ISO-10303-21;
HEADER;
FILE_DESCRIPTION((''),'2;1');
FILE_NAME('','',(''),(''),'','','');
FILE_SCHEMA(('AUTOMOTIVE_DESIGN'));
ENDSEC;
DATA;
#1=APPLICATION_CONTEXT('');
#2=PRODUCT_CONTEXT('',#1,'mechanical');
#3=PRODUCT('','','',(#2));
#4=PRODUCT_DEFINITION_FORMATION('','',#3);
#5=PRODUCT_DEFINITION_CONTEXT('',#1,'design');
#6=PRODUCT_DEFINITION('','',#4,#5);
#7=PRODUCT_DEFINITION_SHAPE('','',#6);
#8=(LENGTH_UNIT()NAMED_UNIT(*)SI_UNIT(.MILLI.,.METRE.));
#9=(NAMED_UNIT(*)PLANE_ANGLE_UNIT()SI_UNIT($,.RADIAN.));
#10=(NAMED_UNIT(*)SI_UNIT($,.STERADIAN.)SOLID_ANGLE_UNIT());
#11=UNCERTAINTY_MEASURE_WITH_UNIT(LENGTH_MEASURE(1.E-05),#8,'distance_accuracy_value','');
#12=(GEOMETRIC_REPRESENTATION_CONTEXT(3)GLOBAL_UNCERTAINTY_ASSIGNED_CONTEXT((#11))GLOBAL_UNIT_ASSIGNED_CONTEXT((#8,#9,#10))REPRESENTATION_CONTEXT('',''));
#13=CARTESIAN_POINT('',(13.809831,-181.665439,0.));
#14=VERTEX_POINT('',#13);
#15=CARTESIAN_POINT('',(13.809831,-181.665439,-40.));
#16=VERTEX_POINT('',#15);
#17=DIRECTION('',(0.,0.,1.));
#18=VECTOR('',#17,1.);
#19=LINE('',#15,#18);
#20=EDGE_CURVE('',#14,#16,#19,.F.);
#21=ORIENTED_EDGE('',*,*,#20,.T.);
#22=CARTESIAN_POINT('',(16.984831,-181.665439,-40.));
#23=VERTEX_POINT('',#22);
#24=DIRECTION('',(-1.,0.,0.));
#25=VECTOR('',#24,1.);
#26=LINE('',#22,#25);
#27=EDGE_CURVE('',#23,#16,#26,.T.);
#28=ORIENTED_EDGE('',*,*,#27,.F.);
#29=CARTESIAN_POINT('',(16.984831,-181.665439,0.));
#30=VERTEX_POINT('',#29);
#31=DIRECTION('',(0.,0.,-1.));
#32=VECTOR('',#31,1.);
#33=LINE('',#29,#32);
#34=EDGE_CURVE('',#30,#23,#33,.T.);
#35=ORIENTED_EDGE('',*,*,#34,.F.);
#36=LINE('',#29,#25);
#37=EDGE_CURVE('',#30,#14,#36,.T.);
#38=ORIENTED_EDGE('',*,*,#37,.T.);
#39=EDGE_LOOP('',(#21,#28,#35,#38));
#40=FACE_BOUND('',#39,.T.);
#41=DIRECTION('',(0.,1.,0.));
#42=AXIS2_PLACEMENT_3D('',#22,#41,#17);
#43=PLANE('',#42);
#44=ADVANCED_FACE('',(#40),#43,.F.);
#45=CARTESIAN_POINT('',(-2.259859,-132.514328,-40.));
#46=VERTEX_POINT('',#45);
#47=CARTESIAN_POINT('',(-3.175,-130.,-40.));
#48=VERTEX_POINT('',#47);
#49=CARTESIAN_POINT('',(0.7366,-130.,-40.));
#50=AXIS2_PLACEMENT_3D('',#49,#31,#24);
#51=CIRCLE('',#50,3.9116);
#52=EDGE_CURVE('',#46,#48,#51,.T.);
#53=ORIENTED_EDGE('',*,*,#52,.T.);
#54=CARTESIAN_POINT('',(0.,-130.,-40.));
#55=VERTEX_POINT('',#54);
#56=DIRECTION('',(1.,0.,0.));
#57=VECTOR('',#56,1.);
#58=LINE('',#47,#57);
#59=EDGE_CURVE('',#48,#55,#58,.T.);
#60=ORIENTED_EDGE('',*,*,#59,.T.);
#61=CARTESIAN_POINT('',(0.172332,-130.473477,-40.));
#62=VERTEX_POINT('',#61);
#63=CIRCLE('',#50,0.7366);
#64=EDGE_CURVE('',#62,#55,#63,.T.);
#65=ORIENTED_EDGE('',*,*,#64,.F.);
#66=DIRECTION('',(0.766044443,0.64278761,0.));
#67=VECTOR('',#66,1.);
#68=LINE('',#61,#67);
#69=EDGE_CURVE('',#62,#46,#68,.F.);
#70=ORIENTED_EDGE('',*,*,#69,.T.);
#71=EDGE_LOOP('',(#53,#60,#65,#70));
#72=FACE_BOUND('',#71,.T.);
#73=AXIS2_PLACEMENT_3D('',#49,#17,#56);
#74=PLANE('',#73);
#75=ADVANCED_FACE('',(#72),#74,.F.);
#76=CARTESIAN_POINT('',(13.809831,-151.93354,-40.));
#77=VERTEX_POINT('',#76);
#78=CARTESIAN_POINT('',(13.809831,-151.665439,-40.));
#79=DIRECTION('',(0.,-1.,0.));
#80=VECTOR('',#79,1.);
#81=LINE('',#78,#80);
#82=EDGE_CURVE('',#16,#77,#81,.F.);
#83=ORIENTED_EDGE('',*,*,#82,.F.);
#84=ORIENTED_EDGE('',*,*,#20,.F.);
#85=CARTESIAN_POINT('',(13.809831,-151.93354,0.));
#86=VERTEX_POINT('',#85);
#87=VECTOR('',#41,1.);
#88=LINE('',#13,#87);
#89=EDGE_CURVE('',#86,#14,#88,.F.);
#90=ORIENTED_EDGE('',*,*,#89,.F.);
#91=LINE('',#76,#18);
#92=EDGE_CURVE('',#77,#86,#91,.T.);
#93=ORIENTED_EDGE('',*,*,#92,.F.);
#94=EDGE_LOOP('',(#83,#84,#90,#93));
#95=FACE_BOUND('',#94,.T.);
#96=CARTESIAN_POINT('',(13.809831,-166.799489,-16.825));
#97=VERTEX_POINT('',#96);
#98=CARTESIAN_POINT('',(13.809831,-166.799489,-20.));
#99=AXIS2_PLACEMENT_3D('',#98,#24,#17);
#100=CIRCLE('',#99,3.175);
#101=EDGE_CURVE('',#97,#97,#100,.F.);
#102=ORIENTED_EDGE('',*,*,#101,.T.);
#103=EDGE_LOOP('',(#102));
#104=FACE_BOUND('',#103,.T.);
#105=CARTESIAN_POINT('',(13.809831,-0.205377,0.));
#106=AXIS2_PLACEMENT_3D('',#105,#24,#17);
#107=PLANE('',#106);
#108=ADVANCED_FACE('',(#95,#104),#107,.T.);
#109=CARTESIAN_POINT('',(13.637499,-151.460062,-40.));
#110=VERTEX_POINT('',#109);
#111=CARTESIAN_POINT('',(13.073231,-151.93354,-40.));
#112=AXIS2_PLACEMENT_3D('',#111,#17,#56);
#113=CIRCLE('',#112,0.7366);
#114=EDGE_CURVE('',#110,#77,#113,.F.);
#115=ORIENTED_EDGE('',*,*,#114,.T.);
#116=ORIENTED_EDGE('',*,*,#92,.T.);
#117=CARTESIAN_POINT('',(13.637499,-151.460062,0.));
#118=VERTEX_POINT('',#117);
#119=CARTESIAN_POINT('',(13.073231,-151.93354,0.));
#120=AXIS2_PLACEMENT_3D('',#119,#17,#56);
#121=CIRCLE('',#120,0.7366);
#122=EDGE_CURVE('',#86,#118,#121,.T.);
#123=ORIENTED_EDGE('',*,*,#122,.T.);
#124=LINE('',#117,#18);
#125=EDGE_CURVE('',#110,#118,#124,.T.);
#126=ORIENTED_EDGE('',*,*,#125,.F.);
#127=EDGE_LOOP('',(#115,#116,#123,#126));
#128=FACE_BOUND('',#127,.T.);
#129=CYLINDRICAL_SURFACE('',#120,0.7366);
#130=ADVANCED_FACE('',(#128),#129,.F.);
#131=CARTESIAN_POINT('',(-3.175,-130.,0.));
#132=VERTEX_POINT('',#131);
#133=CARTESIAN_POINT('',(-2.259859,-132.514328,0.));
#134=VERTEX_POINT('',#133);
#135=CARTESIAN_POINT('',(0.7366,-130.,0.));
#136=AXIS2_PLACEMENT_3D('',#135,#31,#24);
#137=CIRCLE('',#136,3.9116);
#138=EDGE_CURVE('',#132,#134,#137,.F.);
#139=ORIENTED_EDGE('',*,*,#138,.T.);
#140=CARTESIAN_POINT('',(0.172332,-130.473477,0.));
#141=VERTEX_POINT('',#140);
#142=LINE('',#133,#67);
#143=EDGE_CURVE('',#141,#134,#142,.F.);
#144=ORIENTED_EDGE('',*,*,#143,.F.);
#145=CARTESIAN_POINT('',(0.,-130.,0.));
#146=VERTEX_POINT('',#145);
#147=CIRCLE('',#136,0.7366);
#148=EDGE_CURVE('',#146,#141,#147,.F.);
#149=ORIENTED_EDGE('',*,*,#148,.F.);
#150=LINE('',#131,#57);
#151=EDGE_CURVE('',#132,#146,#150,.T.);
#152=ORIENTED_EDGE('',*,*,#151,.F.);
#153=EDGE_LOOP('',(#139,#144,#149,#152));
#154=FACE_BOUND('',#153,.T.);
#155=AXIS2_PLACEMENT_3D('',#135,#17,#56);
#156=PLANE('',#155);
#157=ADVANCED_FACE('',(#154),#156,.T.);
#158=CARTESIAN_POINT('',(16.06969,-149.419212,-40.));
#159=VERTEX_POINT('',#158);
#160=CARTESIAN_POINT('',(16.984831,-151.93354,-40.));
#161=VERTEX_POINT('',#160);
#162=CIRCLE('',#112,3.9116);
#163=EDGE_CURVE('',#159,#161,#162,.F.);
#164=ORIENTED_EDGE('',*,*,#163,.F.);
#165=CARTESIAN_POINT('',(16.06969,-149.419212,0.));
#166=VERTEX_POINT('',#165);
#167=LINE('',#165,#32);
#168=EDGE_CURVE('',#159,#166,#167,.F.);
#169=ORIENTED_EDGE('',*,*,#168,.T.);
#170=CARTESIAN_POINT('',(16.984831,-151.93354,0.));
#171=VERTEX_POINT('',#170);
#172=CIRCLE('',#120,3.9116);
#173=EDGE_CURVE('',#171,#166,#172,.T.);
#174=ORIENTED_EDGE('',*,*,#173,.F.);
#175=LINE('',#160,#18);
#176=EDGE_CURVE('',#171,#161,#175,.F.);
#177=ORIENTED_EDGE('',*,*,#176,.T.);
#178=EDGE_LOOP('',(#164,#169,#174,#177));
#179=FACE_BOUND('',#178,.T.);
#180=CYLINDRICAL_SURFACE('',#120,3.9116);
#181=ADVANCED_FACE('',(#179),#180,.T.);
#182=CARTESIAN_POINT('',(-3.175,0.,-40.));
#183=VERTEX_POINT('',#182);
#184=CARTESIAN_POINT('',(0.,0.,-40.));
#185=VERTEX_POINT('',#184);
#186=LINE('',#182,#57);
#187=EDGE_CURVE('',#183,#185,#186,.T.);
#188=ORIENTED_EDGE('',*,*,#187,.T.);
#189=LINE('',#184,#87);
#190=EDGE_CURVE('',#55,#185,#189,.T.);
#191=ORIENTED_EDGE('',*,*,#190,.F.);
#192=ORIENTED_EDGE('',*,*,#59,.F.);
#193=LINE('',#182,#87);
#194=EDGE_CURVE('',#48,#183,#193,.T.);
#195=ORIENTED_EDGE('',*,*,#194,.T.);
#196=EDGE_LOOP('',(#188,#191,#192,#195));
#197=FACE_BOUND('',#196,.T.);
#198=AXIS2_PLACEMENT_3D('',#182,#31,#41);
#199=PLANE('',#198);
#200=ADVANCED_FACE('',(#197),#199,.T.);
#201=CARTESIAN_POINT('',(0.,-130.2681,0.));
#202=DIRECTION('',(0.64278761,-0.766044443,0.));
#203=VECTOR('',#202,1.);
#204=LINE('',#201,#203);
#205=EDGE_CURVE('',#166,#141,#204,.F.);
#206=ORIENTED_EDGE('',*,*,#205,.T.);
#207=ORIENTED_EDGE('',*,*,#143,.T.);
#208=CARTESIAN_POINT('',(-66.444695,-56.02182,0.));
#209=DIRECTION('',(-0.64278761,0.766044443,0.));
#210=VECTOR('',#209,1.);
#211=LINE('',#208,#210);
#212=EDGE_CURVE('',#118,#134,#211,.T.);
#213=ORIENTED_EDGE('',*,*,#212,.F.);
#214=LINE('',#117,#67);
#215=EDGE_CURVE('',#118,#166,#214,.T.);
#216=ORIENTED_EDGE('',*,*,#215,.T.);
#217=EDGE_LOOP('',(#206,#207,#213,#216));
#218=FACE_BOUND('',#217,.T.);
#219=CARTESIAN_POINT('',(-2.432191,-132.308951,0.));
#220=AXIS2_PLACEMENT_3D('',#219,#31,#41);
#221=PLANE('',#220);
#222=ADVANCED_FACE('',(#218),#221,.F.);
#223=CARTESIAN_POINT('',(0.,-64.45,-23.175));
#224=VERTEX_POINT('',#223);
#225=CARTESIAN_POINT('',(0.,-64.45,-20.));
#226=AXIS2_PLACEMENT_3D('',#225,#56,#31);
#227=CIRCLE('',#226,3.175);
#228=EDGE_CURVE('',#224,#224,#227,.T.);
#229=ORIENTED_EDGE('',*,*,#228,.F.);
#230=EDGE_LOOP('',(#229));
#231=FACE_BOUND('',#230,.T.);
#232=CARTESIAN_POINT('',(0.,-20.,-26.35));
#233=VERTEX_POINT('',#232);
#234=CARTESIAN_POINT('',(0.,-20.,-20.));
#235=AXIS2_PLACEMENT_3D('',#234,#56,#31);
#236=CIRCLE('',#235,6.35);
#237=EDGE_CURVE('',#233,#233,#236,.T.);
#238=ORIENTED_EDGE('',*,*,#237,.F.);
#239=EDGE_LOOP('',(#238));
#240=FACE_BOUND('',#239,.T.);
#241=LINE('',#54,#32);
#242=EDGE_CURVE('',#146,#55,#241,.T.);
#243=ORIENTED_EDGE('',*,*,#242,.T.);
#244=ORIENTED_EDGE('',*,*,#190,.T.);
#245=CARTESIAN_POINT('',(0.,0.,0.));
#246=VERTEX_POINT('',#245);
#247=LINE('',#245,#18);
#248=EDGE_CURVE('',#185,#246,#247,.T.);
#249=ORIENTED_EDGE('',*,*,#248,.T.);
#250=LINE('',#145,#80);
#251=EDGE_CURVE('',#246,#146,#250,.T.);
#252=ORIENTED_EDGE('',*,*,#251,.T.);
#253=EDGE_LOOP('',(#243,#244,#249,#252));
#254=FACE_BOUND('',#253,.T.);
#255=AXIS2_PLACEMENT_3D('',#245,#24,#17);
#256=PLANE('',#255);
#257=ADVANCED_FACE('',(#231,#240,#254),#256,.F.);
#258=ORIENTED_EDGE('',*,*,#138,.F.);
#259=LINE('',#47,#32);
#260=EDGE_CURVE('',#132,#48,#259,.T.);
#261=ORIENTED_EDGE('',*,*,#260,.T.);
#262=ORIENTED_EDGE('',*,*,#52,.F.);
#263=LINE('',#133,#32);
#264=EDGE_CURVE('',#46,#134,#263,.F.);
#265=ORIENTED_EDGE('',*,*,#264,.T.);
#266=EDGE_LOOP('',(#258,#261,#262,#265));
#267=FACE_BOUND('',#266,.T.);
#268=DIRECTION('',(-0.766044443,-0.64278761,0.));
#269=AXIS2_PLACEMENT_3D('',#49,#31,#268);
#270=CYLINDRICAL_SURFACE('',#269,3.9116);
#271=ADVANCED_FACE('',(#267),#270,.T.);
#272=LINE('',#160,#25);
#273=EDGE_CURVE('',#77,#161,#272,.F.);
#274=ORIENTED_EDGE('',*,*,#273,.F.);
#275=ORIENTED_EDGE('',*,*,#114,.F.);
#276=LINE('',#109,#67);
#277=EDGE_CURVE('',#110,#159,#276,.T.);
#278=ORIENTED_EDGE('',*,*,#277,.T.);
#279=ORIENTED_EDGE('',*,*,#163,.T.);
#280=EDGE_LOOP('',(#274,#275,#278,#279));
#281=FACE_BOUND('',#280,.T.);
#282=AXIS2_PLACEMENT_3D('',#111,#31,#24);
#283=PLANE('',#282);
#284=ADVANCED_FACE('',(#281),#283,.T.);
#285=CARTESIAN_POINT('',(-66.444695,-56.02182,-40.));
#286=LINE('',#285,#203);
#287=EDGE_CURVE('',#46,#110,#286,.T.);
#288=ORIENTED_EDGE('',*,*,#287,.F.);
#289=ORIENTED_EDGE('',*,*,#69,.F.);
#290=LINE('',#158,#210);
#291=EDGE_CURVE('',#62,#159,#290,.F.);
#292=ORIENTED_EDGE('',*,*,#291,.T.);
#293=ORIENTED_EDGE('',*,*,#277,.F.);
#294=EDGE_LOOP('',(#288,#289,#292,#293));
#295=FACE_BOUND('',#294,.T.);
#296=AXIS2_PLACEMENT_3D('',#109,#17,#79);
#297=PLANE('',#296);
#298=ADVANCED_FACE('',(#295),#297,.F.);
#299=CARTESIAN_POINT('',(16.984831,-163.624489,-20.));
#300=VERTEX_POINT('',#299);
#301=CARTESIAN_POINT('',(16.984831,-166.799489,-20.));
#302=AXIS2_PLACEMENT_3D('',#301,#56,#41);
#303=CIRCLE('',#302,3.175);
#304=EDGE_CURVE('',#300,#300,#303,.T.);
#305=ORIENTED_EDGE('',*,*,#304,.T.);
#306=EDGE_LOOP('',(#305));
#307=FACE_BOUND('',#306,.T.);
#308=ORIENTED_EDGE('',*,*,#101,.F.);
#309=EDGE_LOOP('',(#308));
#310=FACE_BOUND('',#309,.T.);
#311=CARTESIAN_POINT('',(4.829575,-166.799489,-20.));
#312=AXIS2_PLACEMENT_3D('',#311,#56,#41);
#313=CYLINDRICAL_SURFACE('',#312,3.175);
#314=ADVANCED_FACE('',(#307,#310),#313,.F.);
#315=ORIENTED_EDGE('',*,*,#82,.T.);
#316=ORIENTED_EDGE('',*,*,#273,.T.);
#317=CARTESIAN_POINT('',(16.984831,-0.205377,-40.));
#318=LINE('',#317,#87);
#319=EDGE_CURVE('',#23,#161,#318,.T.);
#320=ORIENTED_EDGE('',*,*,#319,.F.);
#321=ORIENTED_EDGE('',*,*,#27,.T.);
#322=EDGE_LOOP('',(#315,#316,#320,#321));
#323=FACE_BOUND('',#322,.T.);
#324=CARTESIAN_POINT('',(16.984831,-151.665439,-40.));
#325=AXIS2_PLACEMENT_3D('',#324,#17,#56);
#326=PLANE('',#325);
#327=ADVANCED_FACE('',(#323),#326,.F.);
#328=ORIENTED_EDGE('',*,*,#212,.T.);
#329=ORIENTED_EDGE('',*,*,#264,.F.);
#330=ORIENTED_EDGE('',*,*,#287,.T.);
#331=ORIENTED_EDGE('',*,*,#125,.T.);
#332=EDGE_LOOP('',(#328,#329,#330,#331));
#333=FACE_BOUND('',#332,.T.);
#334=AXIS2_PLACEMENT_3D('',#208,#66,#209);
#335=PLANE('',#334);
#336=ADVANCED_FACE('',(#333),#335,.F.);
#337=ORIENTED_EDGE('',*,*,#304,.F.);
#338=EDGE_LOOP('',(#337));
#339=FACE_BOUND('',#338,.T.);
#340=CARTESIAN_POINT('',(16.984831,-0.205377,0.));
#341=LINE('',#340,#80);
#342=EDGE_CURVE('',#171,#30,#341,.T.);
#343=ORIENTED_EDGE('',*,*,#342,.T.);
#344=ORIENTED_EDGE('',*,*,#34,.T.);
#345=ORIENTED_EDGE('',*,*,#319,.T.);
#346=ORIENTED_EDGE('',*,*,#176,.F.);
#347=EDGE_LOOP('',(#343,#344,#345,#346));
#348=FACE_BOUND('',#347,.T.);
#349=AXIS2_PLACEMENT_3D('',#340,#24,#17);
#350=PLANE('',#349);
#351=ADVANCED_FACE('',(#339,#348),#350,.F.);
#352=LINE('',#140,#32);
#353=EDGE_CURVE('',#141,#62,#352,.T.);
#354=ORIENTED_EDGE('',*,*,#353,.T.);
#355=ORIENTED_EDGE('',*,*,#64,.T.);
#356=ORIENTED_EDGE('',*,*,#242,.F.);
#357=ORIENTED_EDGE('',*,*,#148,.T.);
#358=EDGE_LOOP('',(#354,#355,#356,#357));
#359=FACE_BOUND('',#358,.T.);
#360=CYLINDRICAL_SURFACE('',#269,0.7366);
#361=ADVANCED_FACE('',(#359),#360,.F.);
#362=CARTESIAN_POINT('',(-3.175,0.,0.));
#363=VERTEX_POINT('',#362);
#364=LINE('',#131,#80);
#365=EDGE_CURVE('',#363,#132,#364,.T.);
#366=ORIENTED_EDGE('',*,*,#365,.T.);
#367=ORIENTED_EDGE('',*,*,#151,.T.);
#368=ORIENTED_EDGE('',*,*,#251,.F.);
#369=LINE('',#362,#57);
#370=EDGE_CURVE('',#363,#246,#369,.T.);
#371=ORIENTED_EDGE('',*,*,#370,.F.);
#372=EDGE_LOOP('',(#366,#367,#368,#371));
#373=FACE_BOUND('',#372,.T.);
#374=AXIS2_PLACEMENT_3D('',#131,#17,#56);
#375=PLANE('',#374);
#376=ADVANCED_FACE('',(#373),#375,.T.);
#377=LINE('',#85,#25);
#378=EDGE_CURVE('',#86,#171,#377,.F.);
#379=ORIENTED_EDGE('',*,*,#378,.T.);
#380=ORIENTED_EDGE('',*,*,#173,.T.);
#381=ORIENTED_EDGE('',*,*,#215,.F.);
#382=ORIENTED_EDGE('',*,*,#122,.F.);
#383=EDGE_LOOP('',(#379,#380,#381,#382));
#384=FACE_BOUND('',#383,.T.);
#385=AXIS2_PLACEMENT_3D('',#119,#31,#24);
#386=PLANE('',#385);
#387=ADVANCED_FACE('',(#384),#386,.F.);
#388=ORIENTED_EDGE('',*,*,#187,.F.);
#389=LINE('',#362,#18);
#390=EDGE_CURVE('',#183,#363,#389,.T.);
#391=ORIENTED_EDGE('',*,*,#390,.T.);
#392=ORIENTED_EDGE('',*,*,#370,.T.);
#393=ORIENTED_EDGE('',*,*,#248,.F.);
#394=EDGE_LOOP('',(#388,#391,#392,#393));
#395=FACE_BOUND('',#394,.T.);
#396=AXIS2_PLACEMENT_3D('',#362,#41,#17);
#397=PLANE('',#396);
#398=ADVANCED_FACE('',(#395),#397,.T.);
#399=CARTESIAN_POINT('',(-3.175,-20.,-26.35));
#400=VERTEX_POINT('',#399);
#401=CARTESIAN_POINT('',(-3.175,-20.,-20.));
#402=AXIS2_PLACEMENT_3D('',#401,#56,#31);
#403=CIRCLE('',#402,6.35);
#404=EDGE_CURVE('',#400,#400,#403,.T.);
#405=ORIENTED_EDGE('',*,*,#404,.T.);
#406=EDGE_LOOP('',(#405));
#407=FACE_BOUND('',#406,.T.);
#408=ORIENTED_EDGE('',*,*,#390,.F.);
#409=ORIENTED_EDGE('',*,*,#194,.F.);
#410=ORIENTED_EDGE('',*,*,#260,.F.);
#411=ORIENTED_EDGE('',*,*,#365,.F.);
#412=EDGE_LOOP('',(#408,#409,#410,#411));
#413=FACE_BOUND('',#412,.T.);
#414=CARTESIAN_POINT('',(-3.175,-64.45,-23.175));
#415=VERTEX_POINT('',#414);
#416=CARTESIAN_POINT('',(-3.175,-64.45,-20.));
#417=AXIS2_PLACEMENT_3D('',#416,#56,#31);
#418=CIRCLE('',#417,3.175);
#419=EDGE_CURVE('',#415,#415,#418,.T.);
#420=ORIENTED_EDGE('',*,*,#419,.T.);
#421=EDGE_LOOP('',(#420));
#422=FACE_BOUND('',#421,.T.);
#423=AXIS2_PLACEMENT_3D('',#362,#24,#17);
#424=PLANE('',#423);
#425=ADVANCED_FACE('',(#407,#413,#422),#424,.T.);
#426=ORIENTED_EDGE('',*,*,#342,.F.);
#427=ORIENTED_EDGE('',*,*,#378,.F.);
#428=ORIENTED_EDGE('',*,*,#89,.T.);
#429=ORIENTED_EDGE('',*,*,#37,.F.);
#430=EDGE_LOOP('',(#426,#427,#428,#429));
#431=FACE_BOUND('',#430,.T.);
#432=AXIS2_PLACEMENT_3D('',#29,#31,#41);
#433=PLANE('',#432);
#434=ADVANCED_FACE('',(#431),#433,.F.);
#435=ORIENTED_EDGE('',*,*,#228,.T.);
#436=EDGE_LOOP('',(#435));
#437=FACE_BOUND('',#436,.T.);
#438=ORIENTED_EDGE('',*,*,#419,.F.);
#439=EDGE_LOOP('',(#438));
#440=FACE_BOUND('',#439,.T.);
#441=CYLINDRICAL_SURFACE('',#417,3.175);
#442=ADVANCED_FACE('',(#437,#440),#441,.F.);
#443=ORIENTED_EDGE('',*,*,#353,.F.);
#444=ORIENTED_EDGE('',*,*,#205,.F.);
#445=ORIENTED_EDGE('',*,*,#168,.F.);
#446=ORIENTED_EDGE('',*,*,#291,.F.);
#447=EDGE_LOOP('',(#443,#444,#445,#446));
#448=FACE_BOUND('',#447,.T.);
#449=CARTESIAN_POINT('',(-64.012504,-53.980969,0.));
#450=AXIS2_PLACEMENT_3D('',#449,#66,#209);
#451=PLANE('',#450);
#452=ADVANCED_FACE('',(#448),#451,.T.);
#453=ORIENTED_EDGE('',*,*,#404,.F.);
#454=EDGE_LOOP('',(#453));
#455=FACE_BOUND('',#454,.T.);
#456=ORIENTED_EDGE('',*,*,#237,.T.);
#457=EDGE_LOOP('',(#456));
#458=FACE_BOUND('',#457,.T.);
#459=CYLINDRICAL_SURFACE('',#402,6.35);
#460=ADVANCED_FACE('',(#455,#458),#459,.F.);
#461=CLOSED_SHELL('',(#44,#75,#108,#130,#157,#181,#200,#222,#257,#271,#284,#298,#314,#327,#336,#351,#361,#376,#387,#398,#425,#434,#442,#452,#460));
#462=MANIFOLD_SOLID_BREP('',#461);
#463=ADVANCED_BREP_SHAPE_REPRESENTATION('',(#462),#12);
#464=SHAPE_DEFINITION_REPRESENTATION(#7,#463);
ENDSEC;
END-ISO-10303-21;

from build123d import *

# Parameters (mm, degrees)
SKETCH1_W          = 40
SKETCH1_H          = 130
SKETCH1_R          = 6.35
SKETCH1_R_2        = 3.175
BASE_FLANGE1_DEPTH = 3.175
EDGE_FLANGE1_DEPTH = 40
EDGE_FLANGE2_DEPTH = 40
SKETCH20_R         = 3.175
CUT_EXTRUDE3_DEPTH = 3.175


# Sheet-metal steps are written as plain solids
with BuildPart() as part:
    # Sketch1 → Base-Flange1 (new body)
    with BuildSketch(Plane(origin=(0, 0, 0), x_dir=(0, 0, -1), z_dir=(1, 0, 0))):
        with Locations((20, -65)):
            Rectangle(SKETCH1_W, SKETCH1_H)
        with Locations((20, -20)):
            Circle(SKETCH1_R, mode=Mode.SUBTRACT)
        with Locations((20, -64.45)):
            Circle(SKETCH1_R_2, mode=Mode.SUBTRACT)
    extrude(amount=-BASE_FLANGE1_DEPTH)

    # Edge-Flange1 section (across the edge) → Edge-Flange1 (add)
    with BuildSketch(Plane(origin=(0, -130.268100475, 0), x_dir=(0.7660444431189817, 0.642787609686535, 0), z_dir=(0, 0, -1))):
        with BuildLine():
            Line((-3.175, 0.268100475), (-3.175, 25))
            Line((-3.175, 25), (0, 25))
            Line((0, 25), (0, 0.268100475))
            ThreePointArc((0, 0.268100475), (0.044422416, 0.016168437), (0.172331663, -0.205376879))
            Line((0.172331663, -0.205376879), (-2.259859444, -2.246227539))
            ThreePointArc((-2.259859444, -2.246227539), (-2.939101655, -1.069745518), (-3.175, 0.268100475))
        make_face()
    extrude(amount=EDGE_FLANGE1_DEPTH)

    # Edge-Flange2 section (across the edge) → Edge-Flange2 (add)
    with BuildSketch(Plane(origin=(13.809830798, -151.665439092, -40), x_dir=(-1, 0, 0), z_dir=(0, 0, 1))):
        with BuildLine():
            Line((-3.175, 0.268100475), (-3.175, 30))
            Line((-3.175, 30), (0, 30))
            Line((0, 30), (0, 0.268100475))
            ThreePointArc((0, 0.268100475), (0.044422416, 0.016168437), (0.172331663, -0.205376879))
            Line((0.172331663, -0.205376879), (-2.259859444, -2.246227539))
            ThreePointArc((-2.259859444, -2.246227539), (-2.939101655, -1.069745518), (-3.175, 0.268100475))
        make_face()
    extrude(amount=EDGE_FLANGE2_DEPTH)

    # Sketch20 → Cut-Extrude3 (cut)
    with BuildSketch(Plane(origin=(16.984830798, 0, 0), x_dir=(0, 0, -1), z_dir=(1, 0, 0))):
        with Locations(Location((20, -166.799489329, 0), (0, 0, 90))):
            Circle(SKETCH20_R)
    extrude(amount=-CUT_EXTRUDE3_DEPTH, mode=Mode.SUBTRACT)


solid = part.part
